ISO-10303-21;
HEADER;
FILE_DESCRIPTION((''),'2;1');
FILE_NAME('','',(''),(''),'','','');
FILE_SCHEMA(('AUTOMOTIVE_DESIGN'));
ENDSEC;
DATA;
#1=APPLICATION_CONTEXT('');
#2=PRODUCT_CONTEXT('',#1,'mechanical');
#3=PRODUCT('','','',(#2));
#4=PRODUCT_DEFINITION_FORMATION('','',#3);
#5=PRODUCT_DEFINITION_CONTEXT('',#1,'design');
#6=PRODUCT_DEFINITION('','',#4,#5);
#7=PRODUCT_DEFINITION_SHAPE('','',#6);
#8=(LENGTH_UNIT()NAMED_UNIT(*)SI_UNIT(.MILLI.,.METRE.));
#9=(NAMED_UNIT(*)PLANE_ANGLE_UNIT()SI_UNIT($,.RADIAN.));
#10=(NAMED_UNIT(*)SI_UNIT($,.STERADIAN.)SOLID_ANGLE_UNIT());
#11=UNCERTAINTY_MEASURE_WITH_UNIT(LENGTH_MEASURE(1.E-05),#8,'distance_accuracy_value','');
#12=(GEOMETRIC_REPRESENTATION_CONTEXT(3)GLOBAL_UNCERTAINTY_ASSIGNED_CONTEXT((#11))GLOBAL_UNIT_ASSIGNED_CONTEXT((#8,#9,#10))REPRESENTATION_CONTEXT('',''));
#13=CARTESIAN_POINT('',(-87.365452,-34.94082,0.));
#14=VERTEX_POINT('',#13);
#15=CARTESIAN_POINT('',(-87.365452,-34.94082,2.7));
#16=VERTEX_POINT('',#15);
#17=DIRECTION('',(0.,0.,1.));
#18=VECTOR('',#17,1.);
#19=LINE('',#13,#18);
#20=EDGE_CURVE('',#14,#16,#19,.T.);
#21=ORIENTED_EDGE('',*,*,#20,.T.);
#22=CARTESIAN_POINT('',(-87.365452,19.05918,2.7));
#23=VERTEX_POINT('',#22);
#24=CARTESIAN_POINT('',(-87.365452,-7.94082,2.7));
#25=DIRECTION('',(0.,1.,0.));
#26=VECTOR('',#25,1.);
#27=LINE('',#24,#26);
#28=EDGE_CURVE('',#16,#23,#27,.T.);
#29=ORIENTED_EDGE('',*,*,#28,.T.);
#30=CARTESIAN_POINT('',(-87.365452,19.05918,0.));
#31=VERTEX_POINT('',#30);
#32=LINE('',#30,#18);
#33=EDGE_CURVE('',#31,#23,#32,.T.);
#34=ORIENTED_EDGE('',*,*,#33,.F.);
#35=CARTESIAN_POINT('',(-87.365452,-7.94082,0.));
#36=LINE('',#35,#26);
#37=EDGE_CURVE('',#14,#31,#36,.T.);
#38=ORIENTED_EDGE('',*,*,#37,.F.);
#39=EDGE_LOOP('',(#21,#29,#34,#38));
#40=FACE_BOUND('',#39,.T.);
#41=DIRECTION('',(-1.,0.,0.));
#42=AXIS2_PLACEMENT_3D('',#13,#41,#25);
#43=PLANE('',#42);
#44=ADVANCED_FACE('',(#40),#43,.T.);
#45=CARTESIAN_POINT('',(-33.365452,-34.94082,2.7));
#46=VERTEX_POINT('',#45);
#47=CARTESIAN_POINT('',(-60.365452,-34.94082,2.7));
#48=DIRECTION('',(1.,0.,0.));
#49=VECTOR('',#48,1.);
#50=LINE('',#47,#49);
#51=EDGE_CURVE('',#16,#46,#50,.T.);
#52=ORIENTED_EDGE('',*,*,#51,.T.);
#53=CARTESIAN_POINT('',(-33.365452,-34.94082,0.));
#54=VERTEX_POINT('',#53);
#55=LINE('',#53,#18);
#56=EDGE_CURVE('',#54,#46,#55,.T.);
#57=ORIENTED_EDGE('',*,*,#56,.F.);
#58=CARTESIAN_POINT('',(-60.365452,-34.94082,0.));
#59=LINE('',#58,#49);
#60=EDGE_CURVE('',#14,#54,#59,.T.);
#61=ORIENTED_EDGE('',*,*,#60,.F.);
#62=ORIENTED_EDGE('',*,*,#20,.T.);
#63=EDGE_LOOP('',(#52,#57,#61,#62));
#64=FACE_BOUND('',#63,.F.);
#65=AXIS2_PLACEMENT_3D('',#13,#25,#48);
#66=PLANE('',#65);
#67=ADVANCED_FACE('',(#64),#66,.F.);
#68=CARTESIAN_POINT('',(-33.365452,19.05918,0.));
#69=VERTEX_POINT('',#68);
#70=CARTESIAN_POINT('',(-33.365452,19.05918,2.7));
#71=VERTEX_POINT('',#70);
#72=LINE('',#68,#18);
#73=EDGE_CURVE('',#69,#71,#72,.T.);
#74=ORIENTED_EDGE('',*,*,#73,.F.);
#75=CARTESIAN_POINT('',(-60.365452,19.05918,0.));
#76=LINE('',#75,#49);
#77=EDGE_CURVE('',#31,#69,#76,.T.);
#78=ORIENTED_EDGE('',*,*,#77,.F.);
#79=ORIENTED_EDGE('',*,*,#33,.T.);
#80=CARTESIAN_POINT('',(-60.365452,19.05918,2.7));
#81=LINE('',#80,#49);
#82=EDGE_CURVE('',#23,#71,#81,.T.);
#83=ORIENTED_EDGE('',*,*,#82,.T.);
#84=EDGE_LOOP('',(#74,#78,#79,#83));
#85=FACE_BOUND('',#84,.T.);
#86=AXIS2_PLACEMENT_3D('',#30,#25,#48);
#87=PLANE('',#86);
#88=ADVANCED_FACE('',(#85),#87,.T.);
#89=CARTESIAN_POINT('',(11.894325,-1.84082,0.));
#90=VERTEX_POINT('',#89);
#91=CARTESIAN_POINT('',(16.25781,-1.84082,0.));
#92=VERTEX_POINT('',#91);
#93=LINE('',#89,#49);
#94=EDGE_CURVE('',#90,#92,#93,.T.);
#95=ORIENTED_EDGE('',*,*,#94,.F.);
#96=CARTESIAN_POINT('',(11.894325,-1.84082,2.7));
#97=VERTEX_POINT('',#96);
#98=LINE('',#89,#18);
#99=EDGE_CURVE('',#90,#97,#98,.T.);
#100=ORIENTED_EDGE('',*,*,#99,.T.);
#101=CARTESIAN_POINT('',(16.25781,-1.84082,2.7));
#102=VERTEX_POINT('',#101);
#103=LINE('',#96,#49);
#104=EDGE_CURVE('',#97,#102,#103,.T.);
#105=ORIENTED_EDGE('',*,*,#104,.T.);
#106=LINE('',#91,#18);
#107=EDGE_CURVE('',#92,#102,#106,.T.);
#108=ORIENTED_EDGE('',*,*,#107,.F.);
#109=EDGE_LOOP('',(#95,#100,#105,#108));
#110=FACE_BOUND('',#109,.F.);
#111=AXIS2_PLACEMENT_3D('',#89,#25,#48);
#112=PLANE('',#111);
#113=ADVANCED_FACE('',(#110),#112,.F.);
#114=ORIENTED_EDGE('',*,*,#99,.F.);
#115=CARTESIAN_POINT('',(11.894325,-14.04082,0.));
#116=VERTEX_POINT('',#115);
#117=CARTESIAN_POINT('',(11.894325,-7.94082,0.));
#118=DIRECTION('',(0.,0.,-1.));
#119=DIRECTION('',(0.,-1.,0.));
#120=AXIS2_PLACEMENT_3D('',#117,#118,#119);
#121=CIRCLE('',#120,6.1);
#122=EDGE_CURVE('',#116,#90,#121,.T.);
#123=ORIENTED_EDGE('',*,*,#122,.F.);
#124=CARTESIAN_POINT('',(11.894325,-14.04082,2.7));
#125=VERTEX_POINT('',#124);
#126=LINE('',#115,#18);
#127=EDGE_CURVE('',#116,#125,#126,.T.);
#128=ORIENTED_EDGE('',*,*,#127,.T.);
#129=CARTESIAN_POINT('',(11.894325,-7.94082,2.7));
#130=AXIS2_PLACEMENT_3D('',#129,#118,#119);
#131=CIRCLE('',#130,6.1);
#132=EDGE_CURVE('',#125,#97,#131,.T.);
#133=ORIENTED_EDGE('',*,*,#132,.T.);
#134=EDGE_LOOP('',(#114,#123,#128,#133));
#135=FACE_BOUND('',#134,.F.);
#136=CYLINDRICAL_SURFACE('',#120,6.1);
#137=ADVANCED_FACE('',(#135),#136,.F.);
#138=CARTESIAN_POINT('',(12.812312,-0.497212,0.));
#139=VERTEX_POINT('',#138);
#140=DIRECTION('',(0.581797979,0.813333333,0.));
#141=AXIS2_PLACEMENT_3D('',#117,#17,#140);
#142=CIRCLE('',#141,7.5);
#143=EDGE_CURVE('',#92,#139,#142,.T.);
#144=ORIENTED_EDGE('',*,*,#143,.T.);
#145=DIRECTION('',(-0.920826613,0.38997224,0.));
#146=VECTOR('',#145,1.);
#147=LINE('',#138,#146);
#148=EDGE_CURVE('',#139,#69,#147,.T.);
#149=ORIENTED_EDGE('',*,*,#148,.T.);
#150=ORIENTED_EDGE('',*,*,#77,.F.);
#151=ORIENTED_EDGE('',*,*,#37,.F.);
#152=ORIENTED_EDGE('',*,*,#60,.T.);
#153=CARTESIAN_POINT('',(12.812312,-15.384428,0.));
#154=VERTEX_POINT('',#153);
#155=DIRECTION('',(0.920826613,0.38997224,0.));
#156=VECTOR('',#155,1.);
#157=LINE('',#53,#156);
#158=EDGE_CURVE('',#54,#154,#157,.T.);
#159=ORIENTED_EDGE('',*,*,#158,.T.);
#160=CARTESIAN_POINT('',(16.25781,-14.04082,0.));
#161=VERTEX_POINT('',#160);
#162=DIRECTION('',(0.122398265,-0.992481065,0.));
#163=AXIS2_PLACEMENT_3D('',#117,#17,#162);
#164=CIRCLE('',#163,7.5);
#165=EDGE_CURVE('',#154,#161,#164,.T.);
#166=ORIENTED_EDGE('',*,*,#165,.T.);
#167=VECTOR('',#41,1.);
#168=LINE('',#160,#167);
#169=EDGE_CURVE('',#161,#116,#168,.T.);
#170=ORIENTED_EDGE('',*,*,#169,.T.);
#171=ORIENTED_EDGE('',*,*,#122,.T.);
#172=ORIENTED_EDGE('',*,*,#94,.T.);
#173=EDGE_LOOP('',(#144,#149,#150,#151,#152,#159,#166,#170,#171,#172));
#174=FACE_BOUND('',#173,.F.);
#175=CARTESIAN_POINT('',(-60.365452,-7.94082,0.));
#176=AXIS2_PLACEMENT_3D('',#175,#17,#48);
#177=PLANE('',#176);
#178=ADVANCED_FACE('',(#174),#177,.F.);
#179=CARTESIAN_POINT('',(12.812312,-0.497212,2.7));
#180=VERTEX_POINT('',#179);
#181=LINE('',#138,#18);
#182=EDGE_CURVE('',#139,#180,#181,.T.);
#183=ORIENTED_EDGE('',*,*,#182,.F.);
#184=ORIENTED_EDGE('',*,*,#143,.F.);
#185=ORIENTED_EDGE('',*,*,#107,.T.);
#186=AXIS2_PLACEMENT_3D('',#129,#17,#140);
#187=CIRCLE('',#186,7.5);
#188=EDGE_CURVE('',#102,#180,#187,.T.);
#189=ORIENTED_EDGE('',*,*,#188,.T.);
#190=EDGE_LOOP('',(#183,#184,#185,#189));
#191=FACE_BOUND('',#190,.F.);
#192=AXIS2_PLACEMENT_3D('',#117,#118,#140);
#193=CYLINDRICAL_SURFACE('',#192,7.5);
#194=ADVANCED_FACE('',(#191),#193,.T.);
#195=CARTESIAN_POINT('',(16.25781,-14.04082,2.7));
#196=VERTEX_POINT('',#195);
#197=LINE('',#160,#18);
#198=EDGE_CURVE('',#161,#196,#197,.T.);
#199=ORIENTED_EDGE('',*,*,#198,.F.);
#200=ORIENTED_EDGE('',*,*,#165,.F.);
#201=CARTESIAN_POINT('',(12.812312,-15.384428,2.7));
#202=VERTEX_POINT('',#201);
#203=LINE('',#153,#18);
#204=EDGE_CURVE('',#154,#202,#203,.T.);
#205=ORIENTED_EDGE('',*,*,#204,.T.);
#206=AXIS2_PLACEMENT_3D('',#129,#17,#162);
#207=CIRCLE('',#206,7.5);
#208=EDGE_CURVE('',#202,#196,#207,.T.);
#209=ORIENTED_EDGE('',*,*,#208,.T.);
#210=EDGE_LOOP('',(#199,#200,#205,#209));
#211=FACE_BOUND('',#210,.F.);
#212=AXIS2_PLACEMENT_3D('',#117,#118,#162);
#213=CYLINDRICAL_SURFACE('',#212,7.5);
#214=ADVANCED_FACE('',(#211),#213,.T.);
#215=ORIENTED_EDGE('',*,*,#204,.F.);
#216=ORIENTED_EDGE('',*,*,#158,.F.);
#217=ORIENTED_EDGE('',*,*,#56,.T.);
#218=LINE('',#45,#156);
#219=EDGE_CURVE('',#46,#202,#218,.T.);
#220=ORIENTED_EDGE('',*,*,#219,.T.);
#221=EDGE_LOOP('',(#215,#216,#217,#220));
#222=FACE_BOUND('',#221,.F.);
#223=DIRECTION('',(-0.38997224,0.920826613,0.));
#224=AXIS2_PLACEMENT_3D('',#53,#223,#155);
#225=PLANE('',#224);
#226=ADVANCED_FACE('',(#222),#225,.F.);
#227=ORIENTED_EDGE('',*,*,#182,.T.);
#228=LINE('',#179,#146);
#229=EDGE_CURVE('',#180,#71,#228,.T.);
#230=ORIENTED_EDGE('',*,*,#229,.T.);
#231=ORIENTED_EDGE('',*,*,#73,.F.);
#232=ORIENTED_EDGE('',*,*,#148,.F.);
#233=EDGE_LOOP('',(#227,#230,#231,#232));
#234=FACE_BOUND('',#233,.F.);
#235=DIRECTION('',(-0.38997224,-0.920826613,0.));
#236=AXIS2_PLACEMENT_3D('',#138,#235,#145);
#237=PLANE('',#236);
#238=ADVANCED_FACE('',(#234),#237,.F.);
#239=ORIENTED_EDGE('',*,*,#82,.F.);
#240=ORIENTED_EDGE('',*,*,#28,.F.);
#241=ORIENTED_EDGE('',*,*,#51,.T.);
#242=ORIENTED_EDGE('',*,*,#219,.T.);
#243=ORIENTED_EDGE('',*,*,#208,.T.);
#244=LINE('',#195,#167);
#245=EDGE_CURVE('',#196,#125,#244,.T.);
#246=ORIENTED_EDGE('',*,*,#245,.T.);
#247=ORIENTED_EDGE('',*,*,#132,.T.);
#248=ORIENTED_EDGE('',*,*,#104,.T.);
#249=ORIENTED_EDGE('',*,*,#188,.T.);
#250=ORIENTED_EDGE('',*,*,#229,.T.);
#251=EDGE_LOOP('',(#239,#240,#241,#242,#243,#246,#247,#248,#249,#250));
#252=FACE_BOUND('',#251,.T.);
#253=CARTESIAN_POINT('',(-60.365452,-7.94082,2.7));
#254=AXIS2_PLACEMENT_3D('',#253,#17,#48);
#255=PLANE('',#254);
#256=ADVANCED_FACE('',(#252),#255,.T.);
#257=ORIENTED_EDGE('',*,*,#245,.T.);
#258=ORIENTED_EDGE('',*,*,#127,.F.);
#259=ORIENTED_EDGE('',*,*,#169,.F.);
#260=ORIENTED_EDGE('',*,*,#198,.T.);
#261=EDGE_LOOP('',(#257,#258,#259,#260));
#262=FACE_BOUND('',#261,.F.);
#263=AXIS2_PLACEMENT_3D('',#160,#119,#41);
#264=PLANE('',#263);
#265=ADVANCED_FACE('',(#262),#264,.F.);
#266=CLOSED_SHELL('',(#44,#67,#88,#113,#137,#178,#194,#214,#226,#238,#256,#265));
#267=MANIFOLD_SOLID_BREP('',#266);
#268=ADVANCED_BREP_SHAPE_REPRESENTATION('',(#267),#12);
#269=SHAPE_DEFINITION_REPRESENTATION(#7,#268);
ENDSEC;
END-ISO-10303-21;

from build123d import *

# Parameters (mm, degrees)
F0_W     = 54
F0_H     = 54
F1_DEPTH = 2.7


# Not quite as in the source:
# - a feature names something its author has since deleted; it is built from what else it names


with BuildPart() as f1:
    # F0 (on Top) → F1 (new body)
    with BuildSketch(Plane.XY):
        with Locations((-60.3654519308, -7.9408198703)):
            Rectangle(F0_W, F0_H)
        with BuildLine():
            Line((-33.3654519308, -34.9408198703), (12.8123124507, -15.3844278592))
            ThreePointArc((12.8123124507, -15.3844278592), (14.6191753291, -14.9283225153), (16.2578103101, -14.0408198703))
            Line((16.2578103101, -14.0408198703), (11.8943254642, -14.0408198703))
            ThreePointArc((11.8943254642, -14.0408198703), (5.7943254642, -7.9408198703), (11.8943254642, -1.8408198703))
            Line((11.8943254642, -1.8408198703), (16.2578103101, -1.8408198703))
            ThreePointArc((16.2578103101, -1.8408198703), (14.6191753291, -0.9533172253), (12.8123124507, -0.4972118814))
            Line((12.8123124507, -0.4972118814), (-33.3654519308, 19.0591801297))
            Line((-33.3654519308, 19.0591801297), (-33.3654519308, -34.9408198703))
        make_face()
    extrude(amount=F1_DEPTH)


solid = f1.part
